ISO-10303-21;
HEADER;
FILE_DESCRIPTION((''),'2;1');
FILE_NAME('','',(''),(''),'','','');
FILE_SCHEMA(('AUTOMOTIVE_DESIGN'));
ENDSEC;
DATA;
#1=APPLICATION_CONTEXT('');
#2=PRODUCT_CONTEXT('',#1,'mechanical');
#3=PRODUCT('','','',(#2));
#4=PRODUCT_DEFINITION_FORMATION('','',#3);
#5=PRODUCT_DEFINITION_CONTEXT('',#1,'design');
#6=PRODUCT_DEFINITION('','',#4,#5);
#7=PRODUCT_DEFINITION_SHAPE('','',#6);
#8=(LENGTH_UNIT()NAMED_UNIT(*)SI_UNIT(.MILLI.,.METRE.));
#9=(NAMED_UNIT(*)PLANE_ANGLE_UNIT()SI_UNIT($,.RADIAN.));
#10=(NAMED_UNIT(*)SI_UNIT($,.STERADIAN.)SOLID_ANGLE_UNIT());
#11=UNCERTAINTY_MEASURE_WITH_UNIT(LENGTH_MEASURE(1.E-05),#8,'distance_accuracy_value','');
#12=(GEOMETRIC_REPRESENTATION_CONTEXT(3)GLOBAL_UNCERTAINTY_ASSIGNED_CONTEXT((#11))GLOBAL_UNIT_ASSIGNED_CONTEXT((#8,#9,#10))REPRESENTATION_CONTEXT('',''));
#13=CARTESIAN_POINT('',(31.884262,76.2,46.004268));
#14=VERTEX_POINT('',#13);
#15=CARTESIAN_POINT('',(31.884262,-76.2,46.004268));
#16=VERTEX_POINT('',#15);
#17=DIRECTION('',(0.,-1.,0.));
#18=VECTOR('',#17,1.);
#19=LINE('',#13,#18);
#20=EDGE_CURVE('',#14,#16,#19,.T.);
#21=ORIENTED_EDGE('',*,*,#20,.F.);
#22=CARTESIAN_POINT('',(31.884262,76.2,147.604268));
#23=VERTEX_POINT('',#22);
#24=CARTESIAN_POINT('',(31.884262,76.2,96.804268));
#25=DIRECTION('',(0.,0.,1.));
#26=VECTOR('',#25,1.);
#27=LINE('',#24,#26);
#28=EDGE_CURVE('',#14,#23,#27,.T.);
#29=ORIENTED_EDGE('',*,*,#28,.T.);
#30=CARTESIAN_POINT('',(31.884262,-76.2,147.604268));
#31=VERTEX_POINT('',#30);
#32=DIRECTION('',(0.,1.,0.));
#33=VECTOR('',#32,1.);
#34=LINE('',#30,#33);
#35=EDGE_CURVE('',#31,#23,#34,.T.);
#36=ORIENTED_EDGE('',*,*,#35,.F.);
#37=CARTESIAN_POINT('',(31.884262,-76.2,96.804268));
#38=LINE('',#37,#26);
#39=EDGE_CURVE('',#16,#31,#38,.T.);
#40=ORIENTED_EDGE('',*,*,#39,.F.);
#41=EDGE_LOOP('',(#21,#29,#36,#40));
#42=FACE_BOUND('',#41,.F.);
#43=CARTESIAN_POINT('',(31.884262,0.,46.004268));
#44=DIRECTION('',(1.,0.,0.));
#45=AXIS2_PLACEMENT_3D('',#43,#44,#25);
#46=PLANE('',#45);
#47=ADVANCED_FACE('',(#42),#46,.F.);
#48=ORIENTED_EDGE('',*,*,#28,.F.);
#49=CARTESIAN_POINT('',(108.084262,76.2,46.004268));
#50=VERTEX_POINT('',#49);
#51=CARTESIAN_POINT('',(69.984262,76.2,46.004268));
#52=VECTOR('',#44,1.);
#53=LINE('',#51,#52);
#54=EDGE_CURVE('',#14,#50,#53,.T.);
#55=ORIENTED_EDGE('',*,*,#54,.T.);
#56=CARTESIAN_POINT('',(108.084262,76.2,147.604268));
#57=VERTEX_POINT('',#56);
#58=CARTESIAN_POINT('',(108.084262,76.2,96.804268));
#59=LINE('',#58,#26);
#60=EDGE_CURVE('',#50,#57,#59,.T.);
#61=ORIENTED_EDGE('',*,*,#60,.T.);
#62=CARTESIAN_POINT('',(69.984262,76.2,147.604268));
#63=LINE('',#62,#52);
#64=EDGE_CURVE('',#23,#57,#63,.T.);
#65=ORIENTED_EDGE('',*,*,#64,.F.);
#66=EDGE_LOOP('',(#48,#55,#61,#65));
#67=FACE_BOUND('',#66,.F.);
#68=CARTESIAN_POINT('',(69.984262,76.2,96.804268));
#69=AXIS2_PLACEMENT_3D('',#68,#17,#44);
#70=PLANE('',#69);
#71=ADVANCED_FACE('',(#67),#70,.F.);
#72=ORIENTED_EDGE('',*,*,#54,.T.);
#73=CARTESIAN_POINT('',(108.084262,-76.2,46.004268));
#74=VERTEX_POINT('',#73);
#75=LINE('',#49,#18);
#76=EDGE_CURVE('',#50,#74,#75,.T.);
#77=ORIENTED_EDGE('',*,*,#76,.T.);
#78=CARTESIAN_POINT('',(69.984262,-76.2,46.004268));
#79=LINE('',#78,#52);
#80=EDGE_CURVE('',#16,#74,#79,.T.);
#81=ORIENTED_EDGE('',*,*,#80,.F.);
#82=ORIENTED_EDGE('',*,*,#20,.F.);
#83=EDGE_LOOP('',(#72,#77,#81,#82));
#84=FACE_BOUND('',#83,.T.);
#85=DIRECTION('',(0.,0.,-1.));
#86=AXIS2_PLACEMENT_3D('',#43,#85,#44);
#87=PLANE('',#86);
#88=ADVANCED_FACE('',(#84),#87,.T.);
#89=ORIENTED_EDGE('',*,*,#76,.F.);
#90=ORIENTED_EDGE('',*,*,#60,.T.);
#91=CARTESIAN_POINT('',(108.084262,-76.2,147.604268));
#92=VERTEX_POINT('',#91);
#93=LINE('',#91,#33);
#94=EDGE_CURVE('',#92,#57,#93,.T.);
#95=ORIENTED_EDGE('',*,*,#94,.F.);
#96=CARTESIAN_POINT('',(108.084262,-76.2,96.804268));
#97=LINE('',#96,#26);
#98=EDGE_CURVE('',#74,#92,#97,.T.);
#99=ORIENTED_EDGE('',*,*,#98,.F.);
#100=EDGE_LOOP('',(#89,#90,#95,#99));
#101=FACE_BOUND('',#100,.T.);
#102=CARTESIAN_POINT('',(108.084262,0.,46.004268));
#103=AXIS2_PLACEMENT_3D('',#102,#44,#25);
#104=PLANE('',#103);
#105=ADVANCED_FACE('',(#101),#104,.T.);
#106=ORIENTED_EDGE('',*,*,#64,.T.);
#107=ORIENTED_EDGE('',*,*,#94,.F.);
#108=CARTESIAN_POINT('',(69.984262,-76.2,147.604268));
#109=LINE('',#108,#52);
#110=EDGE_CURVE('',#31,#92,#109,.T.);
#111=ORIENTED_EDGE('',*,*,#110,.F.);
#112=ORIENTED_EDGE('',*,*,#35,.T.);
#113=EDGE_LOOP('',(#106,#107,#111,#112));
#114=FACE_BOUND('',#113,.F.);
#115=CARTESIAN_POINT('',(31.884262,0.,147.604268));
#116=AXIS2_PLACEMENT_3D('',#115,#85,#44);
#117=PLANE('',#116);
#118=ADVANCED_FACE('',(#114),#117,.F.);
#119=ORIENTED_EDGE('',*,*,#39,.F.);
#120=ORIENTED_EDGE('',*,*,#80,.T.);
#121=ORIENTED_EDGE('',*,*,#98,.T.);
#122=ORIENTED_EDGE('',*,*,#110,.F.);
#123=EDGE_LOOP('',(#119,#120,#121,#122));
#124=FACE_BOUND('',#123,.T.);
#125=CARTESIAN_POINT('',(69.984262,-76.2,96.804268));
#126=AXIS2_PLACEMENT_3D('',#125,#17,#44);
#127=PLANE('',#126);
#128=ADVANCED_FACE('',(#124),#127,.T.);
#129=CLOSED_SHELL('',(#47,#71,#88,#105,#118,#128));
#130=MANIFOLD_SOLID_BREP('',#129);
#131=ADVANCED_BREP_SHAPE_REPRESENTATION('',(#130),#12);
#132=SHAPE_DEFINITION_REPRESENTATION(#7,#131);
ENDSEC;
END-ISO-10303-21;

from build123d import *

# Parameters (mm, degrees)
F0_W     = 76.2
F0_H     = 101.6
F1_DEPTH = 76.2


# Not quite as in the source:
# - the program builds the solid bodies; features that only make, move or delete a surface that nothing else refers to are left out


with BuildPart() as f1:
    # F0 (on Front) → F1 (new body, symmetric)
    with BuildSketch(Plane.XZ):
        with Locations((69.984262497, 96.8042679829)):
            Rectangle(F0_W, F0_H)
    extrude(amount=F1_DEPTH, both=True)


solid = f1.part
